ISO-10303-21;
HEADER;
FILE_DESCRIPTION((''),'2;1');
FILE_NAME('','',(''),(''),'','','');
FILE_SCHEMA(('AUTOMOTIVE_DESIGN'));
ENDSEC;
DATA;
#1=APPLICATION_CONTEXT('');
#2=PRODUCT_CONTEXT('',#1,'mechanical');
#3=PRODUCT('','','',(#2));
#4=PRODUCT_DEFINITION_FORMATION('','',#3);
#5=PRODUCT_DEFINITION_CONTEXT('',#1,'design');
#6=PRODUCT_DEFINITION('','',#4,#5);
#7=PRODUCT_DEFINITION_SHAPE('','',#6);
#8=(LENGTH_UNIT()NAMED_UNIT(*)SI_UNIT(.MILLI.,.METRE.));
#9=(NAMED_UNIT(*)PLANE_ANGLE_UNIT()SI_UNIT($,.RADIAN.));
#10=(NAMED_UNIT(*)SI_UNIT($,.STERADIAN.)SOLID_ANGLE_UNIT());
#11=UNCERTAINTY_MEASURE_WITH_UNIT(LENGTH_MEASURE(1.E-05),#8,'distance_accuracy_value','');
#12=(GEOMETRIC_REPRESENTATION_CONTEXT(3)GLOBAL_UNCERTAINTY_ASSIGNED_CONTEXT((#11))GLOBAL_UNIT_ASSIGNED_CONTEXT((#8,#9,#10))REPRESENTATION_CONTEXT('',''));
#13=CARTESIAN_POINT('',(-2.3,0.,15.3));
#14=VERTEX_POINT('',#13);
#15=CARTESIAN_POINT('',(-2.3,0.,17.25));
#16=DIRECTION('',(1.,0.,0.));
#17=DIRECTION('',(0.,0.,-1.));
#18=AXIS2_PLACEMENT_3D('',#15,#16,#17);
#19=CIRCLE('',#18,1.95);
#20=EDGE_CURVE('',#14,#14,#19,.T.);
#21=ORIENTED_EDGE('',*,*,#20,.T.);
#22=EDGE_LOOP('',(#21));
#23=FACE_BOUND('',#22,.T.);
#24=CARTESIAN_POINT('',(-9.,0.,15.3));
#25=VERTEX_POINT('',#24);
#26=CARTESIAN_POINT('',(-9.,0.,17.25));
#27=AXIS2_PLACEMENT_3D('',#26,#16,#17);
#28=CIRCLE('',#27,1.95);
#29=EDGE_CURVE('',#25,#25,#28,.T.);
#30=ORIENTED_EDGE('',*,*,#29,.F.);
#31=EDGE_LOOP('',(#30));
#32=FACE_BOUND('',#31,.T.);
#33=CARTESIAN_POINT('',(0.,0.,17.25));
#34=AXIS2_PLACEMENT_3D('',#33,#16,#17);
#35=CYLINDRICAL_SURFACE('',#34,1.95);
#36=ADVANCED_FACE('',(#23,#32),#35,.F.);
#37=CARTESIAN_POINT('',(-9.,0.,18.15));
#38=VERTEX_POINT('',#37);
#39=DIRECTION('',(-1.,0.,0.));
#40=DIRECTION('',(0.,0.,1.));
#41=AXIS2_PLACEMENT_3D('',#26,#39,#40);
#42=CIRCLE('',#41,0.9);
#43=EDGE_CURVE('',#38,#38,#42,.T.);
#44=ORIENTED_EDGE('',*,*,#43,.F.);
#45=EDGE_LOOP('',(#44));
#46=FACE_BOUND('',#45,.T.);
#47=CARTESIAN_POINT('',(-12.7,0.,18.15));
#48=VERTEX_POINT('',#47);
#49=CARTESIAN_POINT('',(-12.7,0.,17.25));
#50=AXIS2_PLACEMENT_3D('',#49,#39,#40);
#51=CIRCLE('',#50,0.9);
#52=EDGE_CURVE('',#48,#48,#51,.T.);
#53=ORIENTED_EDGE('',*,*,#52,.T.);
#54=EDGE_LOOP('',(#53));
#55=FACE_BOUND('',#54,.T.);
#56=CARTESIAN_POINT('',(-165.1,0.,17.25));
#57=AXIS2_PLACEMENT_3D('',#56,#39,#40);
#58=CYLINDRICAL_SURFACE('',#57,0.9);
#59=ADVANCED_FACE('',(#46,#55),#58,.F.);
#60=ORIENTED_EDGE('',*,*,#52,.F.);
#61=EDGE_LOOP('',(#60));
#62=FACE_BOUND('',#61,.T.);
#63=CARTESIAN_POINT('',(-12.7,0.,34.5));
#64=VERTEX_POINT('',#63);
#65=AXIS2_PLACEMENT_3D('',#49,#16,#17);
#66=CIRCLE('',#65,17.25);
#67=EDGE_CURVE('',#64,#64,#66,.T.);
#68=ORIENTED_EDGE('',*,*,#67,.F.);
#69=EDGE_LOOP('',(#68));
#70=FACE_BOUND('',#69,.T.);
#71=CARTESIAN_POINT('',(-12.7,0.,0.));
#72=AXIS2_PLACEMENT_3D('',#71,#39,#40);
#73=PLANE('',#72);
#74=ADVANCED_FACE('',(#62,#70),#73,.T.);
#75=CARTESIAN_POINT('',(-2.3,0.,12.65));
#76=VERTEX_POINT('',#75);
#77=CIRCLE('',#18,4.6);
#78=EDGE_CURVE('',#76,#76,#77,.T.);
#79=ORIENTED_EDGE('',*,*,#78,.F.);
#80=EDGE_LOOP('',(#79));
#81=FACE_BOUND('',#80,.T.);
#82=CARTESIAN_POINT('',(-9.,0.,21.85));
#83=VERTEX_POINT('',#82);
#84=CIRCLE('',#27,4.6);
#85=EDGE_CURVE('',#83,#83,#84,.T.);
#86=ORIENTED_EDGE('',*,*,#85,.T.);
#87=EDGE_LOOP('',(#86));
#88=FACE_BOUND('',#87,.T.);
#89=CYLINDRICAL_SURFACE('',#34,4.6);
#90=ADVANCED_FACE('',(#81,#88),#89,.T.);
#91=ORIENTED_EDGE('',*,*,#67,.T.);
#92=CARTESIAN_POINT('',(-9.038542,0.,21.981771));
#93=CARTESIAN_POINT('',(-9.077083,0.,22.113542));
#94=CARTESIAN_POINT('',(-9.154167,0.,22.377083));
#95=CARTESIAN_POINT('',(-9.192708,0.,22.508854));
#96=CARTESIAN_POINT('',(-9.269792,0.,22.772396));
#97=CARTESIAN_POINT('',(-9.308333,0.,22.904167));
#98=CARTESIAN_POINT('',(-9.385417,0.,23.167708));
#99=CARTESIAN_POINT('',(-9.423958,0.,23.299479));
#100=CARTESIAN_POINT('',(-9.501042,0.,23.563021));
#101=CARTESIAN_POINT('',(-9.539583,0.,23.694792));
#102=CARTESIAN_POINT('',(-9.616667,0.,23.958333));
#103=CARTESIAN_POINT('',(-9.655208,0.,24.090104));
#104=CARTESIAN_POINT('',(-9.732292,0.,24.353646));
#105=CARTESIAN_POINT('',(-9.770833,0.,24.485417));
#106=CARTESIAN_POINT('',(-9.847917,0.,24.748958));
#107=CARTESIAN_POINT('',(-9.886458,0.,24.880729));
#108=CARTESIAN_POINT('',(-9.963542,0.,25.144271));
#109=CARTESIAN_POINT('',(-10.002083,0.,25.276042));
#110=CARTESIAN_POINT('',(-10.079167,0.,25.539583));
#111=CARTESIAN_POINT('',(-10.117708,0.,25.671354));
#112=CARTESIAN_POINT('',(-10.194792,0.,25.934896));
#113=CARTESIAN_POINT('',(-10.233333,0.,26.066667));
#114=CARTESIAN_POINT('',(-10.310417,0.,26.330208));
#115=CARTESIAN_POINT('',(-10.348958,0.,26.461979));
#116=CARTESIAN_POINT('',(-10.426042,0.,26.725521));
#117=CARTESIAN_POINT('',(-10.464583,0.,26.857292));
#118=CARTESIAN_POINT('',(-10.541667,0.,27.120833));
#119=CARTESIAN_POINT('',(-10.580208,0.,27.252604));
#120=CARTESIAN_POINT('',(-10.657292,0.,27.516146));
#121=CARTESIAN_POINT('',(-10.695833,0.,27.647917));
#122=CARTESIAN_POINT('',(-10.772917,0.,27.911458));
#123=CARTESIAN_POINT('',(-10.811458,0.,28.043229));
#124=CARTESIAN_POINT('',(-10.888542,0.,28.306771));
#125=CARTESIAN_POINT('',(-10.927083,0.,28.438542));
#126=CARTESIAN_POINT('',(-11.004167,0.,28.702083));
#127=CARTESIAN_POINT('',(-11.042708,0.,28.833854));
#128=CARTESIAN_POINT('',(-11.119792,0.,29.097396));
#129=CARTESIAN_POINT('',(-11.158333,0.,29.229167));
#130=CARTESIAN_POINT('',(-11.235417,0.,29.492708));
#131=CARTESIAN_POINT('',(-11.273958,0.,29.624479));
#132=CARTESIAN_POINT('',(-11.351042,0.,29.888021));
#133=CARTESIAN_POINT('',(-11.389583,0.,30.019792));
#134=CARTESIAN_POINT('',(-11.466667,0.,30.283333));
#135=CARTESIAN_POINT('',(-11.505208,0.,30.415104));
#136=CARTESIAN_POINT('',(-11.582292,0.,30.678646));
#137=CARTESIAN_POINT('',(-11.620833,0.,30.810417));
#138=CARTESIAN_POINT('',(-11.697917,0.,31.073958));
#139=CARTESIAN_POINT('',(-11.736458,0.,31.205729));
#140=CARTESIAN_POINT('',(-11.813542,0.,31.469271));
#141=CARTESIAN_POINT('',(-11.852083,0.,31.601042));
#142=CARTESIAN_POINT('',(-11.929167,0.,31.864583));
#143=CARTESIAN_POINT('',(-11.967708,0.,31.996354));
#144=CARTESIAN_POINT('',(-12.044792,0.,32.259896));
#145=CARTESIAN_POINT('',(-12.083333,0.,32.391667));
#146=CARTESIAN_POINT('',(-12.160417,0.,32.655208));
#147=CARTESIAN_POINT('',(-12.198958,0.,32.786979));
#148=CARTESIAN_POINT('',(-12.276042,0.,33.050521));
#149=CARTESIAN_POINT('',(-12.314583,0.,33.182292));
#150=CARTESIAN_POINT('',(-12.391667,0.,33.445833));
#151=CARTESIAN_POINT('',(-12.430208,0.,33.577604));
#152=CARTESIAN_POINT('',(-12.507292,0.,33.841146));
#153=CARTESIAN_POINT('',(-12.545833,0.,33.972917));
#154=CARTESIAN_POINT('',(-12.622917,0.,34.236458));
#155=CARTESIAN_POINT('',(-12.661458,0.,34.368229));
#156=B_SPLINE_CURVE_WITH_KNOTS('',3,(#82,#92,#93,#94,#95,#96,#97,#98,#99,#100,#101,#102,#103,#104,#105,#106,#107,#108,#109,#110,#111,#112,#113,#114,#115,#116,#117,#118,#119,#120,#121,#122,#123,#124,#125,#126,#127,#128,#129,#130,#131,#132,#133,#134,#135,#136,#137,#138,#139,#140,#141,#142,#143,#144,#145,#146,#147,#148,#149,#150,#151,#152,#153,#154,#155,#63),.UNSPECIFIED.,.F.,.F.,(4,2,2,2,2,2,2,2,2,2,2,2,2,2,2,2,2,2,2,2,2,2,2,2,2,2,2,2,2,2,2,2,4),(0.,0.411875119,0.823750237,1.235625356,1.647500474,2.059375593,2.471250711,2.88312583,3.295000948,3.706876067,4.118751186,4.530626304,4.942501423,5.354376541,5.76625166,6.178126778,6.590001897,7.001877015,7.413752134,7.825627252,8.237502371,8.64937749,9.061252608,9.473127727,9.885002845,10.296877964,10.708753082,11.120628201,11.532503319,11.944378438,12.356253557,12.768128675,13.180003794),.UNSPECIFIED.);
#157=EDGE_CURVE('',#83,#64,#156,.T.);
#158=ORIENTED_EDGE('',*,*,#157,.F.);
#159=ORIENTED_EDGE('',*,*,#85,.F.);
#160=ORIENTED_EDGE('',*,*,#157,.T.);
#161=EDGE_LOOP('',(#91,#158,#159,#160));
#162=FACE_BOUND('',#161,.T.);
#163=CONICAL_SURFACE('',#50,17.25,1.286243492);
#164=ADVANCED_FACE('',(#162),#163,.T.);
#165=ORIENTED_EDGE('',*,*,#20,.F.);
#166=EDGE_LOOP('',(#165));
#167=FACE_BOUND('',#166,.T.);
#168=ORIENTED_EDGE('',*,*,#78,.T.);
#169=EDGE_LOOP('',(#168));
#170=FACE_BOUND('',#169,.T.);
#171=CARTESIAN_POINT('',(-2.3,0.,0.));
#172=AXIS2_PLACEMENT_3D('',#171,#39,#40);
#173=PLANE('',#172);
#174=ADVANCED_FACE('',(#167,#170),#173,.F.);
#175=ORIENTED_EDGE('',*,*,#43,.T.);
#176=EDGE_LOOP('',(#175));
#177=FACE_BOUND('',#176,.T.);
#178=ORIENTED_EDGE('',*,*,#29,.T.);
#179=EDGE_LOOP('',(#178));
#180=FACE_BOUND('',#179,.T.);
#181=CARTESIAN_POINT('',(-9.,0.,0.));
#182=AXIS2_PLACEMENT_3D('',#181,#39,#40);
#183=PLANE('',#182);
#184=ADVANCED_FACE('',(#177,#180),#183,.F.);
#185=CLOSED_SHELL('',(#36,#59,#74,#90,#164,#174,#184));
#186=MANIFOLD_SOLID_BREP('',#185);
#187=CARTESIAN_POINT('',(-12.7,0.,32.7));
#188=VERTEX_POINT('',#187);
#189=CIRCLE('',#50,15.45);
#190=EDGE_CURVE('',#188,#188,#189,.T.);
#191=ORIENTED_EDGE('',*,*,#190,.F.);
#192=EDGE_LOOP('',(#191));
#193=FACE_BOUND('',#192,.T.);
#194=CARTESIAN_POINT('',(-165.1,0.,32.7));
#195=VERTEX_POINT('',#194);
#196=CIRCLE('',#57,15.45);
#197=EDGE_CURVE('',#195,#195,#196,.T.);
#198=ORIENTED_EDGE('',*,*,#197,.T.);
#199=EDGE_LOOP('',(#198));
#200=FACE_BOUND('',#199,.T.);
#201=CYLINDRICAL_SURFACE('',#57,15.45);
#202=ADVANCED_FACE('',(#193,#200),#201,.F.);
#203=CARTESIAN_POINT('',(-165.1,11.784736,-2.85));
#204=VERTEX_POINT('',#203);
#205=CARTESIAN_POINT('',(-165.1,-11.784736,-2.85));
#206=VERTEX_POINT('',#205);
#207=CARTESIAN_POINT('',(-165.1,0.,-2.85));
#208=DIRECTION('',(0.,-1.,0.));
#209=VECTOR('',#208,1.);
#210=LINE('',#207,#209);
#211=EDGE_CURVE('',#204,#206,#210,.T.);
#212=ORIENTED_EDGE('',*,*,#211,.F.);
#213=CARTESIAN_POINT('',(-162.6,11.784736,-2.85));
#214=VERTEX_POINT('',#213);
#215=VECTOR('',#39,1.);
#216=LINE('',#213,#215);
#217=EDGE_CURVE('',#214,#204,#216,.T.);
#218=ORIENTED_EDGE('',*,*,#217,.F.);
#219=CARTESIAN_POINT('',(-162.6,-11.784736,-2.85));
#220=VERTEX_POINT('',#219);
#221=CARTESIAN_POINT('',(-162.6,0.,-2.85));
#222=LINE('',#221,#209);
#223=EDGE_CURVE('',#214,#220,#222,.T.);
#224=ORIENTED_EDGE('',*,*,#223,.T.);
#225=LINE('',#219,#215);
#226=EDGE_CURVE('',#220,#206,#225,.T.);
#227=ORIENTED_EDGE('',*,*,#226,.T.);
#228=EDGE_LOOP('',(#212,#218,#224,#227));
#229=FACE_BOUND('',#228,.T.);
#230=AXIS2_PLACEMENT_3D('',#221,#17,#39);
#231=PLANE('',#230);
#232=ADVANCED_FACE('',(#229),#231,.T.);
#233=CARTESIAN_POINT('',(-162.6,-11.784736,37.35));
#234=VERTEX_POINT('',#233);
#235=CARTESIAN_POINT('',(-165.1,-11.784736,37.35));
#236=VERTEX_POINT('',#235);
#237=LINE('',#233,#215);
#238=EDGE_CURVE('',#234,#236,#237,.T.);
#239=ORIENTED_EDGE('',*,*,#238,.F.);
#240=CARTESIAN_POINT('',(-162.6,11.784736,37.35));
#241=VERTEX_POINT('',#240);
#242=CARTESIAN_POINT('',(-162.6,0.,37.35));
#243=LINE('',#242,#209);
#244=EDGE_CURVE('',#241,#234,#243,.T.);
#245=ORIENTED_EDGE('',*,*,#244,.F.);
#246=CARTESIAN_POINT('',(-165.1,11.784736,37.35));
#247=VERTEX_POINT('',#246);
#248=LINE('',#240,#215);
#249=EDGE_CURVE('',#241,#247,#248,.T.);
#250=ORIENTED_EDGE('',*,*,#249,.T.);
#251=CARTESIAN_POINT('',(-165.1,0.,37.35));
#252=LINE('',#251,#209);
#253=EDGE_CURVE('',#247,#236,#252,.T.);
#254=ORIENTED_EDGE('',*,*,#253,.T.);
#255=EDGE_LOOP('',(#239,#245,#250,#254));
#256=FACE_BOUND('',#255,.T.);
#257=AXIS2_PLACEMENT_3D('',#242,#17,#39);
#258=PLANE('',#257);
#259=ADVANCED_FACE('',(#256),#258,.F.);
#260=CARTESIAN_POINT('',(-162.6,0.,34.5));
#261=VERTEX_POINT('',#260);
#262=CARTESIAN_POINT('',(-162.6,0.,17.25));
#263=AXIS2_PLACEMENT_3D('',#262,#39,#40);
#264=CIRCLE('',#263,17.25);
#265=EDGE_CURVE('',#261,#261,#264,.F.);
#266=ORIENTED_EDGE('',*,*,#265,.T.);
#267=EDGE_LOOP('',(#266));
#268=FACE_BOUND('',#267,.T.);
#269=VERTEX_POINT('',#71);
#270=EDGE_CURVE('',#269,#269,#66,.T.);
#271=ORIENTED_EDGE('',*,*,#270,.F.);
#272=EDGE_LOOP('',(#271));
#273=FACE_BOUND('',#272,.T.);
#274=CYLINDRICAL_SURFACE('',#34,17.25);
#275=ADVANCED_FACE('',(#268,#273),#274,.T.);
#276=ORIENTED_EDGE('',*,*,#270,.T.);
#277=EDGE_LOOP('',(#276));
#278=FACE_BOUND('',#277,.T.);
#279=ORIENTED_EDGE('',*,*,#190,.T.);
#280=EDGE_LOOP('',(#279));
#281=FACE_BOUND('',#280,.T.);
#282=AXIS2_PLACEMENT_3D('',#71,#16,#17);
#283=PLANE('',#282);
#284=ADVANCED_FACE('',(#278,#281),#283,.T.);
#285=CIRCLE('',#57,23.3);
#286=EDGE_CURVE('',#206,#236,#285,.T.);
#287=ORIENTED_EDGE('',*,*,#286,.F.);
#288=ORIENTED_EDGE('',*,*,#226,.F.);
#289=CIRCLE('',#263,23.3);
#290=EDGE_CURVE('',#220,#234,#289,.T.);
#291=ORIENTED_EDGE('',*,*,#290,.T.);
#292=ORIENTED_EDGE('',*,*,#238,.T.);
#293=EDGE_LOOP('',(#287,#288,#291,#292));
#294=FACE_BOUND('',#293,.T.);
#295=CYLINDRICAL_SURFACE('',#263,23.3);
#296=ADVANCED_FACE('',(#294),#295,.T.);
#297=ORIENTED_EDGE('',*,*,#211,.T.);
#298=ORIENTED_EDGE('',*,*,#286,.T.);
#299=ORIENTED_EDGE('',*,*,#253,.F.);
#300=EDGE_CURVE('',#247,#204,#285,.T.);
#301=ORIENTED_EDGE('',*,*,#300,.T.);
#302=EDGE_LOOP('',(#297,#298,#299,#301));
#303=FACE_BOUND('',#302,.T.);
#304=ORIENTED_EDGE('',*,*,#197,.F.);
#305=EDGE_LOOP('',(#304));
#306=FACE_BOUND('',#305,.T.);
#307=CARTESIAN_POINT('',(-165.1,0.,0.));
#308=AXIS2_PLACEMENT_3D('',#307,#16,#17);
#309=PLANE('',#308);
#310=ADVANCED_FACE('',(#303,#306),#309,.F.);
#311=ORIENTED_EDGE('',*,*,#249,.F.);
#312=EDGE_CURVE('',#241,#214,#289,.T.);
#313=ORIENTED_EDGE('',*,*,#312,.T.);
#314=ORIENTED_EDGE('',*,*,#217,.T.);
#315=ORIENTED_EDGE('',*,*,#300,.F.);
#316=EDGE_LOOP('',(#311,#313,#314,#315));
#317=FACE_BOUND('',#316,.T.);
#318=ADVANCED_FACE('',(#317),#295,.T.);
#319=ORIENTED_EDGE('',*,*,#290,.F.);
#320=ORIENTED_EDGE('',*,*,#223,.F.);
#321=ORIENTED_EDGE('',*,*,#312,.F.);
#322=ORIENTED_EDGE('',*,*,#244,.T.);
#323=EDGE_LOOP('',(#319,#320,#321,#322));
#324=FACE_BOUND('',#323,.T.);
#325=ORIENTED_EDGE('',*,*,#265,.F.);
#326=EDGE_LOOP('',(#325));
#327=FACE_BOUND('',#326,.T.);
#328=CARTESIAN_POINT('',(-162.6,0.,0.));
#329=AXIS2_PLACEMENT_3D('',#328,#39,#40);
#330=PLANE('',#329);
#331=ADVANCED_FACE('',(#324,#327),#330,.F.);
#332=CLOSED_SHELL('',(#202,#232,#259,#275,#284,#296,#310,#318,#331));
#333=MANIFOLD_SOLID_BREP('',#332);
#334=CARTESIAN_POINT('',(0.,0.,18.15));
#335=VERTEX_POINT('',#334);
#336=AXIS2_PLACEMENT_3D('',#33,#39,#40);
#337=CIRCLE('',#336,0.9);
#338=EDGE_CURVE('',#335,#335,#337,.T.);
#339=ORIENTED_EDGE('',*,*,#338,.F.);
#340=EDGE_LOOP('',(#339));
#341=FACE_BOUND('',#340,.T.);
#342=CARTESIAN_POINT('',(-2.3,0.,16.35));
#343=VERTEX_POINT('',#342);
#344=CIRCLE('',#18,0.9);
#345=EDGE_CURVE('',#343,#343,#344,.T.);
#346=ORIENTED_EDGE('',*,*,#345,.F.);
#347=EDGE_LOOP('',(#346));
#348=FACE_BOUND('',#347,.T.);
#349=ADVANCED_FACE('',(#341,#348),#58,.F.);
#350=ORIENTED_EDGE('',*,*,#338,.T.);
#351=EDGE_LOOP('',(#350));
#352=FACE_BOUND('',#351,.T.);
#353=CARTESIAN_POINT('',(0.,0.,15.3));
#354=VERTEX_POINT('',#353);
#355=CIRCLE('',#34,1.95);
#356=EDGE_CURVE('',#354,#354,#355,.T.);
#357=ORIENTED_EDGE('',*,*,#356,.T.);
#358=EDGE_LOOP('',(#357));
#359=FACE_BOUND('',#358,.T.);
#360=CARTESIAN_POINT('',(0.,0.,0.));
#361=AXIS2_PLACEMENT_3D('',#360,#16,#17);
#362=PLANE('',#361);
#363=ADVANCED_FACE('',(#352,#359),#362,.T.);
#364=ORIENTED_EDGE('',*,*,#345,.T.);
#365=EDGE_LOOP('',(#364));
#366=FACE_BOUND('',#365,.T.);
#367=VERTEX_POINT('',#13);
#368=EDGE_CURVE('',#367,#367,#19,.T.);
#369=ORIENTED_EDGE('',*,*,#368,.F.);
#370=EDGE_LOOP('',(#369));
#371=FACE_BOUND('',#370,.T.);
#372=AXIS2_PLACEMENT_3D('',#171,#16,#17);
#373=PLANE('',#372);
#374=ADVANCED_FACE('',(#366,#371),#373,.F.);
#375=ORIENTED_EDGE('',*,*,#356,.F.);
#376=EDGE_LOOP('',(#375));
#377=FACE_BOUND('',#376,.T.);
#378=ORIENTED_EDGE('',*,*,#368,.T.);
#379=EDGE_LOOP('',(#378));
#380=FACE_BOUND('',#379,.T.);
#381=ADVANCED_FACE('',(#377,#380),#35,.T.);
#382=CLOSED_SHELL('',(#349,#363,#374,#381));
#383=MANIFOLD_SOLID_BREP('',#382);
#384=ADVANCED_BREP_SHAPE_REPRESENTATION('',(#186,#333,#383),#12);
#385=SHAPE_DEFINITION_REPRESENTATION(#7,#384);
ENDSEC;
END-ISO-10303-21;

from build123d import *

# Parameters (mm, degrees)
REVOLVE1_START       = -2.3
REVOLVE1_OUTLINE_R   = 1.95
REVOLVE1_DEPTH       = 2.3
REVOLVE1_START_2     = -165.1
REVOLVE1_3_OUTLINE_R = 17.25
REVOLVE1_3_DEPTH     = 152.4
BOSS_EXTRUDE1_DEPTH  = 2.5
SKETCH8_W            = 12.7
SKETCH8_H            = 0.9


# Read off the part's stored shape, not the designer's step: Revolve1
with BuildPart() as part:
    # Revolve1 outline → Revolve1 (new body)
    with BuildSketch(Plane.YZ.offset(REVOLVE1_START)):
        with Locations((0, 17.25)):
            Circle(REVOLVE1_OUTLINE_R)
    extrude(amount=REVOLVE1_DEPTH)


with BuildPart() as body_2:
    # Revolve1 2 outline → Revolve1 2 (revolve)
    with BuildSketch(Plane.YX.offset(-17.25)):
        Polygon((1.95, -9), (0, -9), (0, -12.7), (17.25, -12.7), (4.6, -9), (4.6, -2.3), (1.95, -2.3), align=None)
    revolve(axis=Axis((0, 0, 17.25), (1, 0, 0)))


with BuildPart() as body_3:
    # Revolve1 3 outline → Revolve1 3 (new body)
    with BuildSketch(Plane.YZ.offset(REVOLVE1_START_2)):
        with Locations((0, 17.25)):
            Circle(REVOLVE1_3_OUTLINE_R)
    extrude(amount=REVOLVE1_3_DEPTH)

    # Sketch3 → Boss-Extrude1 (add)
    with BuildSketch(Plane.ZY.offset(165.1)):
        with BuildLine():
            ThreePointArc((37.35, 11.78473589), (17.25, 23.3), (-2.85, 11.78473589))
            Line((-2.85, 11.78473589), (4.653075772, 11.78473589))
            ThreePointArc((4.653075772, 11.78473589), (17.25, 17.25), (29.846924228, 11.78473589))
            Line((29.846924228, 11.78473589), (37.35, 11.78473589))
        make_face()
        with BuildLine():
            ThreePointArc((29.846924228, 11.78473589), (17.25, 17.25), (4.653075772, 11.78473589))
            Line((4.653075772, 11.78473589), (29.846924228, 11.78473589))
        make_face()
        with BuildLine():
            Line((29.846924228, 11.78473589), (4.653075772, 11.78473589))
            ThreePointArc((4.653075772, 11.78473589), (0, 0), (4.653075772, -11.78473589))
            Line((4.653075772, -11.78473589), (29.846924228, -11.78473589))
            ThreePointArc((29.846924228, -11.78473589), (33.294616588, -6.335043689), (34.5, 0))
            ThreePointArc((34.5, 0), (33.294616588, 6.335043689), (29.846924228, 11.78473589))
        make_face()
        with BuildLine():
            Line((4.653075772, 11.78473589), (-2.85, 11.78473589))
            Line((-2.85, 11.78473589), (-2.85, -11.78473589))
            Line((-2.85, -11.78473589), (4.653075772, -11.78473589))
            ThreePointArc((4.653075772, -11.78473589), (0, 0), (4.653075772, 11.78473589))
        make_face()
        with BuildLine():
            Line((4.653075772, -11.78473589), (-2.85, -11.78473589))
            ThreePointArc((-2.85, -11.78473589), (17.25, -23.3), (37.35, -11.78473589))
            Line((37.35, -11.78473589), (29.846924228, -11.78473589))
            ThreePointArc((29.846924228, -11.78473589), (17.25, -17.25), (4.653075772, -11.78473589))
        make_face()
        with BuildLine():
            Line((29.846924228, -11.78473589), (4.653075772, -11.78473589))
            ThreePointArc((4.653075772, -11.78473589), (17.25, -17.25), (29.846924228, -11.78473589))
        make_face()
        with BuildLine():
            Line((37.35, -11.78473589), (37.35, 11.78473589))
            Line((37.35, 11.78473589), (29.846924228, 11.78473589))
            ThreePointArc((29.846924228, 11.78473589), (33.294616588, 6.335043689), (34.5, 0))
            ThreePointArc((34.5, 0), (33.294616588, -6.335043689), (29.846924228, -11.78473589))
            Line((29.846924228, -11.78473589), (37.35, -11.78473589))
        make_face()
    extrude(amount=-BOSS_EXTRUDE1_DEPTH)


with BuildPart() as cut_revolve9_tool:
    # Sketch8 → Cut-Revolve9 (revolve)
    with BuildSketch(Plane(origin=(0, 0, 0), x_dir=(1, 0, 0), z_dir=(0, 1, 0))):
        Polygon((-165.1, -1.8), (-165.1, -17.25), (-12.7, -17.25), (-12.7, -16.35), (-12.7, -1.8), align=None)
        with Locations((-6.35, -16.8)):
            Rectangle(SKETCH8_W, SKETCH8_H)
    revolve(axis=Axis((-165.1, 0, 17.25), (1, 0, 0)))


with BuildPart() as part_1:
    add(part.part)

    # Cut-Revolve9: cut by cut_revolve9_tool
    add(cut_revolve9_tool.part, mode=Mode.SUBTRACT)


with BuildPart() as body_2_1:
    add(body_2.part)

    # Cut-Revolve9: cut by cut_revolve9_tool
    add(cut_revolve9_tool.part, mode=Mode.SUBTRACT)


with BuildPart() as body_3_1:
    add(body_3.part)

    # Cut-Revolve9: cut by cut_revolve9_tool
    add(cut_revolve9_tool.part, mode=Mode.SUBTRACT)


solid = Compound([part_1.part, body_2_1.part, body_3_1.part])
